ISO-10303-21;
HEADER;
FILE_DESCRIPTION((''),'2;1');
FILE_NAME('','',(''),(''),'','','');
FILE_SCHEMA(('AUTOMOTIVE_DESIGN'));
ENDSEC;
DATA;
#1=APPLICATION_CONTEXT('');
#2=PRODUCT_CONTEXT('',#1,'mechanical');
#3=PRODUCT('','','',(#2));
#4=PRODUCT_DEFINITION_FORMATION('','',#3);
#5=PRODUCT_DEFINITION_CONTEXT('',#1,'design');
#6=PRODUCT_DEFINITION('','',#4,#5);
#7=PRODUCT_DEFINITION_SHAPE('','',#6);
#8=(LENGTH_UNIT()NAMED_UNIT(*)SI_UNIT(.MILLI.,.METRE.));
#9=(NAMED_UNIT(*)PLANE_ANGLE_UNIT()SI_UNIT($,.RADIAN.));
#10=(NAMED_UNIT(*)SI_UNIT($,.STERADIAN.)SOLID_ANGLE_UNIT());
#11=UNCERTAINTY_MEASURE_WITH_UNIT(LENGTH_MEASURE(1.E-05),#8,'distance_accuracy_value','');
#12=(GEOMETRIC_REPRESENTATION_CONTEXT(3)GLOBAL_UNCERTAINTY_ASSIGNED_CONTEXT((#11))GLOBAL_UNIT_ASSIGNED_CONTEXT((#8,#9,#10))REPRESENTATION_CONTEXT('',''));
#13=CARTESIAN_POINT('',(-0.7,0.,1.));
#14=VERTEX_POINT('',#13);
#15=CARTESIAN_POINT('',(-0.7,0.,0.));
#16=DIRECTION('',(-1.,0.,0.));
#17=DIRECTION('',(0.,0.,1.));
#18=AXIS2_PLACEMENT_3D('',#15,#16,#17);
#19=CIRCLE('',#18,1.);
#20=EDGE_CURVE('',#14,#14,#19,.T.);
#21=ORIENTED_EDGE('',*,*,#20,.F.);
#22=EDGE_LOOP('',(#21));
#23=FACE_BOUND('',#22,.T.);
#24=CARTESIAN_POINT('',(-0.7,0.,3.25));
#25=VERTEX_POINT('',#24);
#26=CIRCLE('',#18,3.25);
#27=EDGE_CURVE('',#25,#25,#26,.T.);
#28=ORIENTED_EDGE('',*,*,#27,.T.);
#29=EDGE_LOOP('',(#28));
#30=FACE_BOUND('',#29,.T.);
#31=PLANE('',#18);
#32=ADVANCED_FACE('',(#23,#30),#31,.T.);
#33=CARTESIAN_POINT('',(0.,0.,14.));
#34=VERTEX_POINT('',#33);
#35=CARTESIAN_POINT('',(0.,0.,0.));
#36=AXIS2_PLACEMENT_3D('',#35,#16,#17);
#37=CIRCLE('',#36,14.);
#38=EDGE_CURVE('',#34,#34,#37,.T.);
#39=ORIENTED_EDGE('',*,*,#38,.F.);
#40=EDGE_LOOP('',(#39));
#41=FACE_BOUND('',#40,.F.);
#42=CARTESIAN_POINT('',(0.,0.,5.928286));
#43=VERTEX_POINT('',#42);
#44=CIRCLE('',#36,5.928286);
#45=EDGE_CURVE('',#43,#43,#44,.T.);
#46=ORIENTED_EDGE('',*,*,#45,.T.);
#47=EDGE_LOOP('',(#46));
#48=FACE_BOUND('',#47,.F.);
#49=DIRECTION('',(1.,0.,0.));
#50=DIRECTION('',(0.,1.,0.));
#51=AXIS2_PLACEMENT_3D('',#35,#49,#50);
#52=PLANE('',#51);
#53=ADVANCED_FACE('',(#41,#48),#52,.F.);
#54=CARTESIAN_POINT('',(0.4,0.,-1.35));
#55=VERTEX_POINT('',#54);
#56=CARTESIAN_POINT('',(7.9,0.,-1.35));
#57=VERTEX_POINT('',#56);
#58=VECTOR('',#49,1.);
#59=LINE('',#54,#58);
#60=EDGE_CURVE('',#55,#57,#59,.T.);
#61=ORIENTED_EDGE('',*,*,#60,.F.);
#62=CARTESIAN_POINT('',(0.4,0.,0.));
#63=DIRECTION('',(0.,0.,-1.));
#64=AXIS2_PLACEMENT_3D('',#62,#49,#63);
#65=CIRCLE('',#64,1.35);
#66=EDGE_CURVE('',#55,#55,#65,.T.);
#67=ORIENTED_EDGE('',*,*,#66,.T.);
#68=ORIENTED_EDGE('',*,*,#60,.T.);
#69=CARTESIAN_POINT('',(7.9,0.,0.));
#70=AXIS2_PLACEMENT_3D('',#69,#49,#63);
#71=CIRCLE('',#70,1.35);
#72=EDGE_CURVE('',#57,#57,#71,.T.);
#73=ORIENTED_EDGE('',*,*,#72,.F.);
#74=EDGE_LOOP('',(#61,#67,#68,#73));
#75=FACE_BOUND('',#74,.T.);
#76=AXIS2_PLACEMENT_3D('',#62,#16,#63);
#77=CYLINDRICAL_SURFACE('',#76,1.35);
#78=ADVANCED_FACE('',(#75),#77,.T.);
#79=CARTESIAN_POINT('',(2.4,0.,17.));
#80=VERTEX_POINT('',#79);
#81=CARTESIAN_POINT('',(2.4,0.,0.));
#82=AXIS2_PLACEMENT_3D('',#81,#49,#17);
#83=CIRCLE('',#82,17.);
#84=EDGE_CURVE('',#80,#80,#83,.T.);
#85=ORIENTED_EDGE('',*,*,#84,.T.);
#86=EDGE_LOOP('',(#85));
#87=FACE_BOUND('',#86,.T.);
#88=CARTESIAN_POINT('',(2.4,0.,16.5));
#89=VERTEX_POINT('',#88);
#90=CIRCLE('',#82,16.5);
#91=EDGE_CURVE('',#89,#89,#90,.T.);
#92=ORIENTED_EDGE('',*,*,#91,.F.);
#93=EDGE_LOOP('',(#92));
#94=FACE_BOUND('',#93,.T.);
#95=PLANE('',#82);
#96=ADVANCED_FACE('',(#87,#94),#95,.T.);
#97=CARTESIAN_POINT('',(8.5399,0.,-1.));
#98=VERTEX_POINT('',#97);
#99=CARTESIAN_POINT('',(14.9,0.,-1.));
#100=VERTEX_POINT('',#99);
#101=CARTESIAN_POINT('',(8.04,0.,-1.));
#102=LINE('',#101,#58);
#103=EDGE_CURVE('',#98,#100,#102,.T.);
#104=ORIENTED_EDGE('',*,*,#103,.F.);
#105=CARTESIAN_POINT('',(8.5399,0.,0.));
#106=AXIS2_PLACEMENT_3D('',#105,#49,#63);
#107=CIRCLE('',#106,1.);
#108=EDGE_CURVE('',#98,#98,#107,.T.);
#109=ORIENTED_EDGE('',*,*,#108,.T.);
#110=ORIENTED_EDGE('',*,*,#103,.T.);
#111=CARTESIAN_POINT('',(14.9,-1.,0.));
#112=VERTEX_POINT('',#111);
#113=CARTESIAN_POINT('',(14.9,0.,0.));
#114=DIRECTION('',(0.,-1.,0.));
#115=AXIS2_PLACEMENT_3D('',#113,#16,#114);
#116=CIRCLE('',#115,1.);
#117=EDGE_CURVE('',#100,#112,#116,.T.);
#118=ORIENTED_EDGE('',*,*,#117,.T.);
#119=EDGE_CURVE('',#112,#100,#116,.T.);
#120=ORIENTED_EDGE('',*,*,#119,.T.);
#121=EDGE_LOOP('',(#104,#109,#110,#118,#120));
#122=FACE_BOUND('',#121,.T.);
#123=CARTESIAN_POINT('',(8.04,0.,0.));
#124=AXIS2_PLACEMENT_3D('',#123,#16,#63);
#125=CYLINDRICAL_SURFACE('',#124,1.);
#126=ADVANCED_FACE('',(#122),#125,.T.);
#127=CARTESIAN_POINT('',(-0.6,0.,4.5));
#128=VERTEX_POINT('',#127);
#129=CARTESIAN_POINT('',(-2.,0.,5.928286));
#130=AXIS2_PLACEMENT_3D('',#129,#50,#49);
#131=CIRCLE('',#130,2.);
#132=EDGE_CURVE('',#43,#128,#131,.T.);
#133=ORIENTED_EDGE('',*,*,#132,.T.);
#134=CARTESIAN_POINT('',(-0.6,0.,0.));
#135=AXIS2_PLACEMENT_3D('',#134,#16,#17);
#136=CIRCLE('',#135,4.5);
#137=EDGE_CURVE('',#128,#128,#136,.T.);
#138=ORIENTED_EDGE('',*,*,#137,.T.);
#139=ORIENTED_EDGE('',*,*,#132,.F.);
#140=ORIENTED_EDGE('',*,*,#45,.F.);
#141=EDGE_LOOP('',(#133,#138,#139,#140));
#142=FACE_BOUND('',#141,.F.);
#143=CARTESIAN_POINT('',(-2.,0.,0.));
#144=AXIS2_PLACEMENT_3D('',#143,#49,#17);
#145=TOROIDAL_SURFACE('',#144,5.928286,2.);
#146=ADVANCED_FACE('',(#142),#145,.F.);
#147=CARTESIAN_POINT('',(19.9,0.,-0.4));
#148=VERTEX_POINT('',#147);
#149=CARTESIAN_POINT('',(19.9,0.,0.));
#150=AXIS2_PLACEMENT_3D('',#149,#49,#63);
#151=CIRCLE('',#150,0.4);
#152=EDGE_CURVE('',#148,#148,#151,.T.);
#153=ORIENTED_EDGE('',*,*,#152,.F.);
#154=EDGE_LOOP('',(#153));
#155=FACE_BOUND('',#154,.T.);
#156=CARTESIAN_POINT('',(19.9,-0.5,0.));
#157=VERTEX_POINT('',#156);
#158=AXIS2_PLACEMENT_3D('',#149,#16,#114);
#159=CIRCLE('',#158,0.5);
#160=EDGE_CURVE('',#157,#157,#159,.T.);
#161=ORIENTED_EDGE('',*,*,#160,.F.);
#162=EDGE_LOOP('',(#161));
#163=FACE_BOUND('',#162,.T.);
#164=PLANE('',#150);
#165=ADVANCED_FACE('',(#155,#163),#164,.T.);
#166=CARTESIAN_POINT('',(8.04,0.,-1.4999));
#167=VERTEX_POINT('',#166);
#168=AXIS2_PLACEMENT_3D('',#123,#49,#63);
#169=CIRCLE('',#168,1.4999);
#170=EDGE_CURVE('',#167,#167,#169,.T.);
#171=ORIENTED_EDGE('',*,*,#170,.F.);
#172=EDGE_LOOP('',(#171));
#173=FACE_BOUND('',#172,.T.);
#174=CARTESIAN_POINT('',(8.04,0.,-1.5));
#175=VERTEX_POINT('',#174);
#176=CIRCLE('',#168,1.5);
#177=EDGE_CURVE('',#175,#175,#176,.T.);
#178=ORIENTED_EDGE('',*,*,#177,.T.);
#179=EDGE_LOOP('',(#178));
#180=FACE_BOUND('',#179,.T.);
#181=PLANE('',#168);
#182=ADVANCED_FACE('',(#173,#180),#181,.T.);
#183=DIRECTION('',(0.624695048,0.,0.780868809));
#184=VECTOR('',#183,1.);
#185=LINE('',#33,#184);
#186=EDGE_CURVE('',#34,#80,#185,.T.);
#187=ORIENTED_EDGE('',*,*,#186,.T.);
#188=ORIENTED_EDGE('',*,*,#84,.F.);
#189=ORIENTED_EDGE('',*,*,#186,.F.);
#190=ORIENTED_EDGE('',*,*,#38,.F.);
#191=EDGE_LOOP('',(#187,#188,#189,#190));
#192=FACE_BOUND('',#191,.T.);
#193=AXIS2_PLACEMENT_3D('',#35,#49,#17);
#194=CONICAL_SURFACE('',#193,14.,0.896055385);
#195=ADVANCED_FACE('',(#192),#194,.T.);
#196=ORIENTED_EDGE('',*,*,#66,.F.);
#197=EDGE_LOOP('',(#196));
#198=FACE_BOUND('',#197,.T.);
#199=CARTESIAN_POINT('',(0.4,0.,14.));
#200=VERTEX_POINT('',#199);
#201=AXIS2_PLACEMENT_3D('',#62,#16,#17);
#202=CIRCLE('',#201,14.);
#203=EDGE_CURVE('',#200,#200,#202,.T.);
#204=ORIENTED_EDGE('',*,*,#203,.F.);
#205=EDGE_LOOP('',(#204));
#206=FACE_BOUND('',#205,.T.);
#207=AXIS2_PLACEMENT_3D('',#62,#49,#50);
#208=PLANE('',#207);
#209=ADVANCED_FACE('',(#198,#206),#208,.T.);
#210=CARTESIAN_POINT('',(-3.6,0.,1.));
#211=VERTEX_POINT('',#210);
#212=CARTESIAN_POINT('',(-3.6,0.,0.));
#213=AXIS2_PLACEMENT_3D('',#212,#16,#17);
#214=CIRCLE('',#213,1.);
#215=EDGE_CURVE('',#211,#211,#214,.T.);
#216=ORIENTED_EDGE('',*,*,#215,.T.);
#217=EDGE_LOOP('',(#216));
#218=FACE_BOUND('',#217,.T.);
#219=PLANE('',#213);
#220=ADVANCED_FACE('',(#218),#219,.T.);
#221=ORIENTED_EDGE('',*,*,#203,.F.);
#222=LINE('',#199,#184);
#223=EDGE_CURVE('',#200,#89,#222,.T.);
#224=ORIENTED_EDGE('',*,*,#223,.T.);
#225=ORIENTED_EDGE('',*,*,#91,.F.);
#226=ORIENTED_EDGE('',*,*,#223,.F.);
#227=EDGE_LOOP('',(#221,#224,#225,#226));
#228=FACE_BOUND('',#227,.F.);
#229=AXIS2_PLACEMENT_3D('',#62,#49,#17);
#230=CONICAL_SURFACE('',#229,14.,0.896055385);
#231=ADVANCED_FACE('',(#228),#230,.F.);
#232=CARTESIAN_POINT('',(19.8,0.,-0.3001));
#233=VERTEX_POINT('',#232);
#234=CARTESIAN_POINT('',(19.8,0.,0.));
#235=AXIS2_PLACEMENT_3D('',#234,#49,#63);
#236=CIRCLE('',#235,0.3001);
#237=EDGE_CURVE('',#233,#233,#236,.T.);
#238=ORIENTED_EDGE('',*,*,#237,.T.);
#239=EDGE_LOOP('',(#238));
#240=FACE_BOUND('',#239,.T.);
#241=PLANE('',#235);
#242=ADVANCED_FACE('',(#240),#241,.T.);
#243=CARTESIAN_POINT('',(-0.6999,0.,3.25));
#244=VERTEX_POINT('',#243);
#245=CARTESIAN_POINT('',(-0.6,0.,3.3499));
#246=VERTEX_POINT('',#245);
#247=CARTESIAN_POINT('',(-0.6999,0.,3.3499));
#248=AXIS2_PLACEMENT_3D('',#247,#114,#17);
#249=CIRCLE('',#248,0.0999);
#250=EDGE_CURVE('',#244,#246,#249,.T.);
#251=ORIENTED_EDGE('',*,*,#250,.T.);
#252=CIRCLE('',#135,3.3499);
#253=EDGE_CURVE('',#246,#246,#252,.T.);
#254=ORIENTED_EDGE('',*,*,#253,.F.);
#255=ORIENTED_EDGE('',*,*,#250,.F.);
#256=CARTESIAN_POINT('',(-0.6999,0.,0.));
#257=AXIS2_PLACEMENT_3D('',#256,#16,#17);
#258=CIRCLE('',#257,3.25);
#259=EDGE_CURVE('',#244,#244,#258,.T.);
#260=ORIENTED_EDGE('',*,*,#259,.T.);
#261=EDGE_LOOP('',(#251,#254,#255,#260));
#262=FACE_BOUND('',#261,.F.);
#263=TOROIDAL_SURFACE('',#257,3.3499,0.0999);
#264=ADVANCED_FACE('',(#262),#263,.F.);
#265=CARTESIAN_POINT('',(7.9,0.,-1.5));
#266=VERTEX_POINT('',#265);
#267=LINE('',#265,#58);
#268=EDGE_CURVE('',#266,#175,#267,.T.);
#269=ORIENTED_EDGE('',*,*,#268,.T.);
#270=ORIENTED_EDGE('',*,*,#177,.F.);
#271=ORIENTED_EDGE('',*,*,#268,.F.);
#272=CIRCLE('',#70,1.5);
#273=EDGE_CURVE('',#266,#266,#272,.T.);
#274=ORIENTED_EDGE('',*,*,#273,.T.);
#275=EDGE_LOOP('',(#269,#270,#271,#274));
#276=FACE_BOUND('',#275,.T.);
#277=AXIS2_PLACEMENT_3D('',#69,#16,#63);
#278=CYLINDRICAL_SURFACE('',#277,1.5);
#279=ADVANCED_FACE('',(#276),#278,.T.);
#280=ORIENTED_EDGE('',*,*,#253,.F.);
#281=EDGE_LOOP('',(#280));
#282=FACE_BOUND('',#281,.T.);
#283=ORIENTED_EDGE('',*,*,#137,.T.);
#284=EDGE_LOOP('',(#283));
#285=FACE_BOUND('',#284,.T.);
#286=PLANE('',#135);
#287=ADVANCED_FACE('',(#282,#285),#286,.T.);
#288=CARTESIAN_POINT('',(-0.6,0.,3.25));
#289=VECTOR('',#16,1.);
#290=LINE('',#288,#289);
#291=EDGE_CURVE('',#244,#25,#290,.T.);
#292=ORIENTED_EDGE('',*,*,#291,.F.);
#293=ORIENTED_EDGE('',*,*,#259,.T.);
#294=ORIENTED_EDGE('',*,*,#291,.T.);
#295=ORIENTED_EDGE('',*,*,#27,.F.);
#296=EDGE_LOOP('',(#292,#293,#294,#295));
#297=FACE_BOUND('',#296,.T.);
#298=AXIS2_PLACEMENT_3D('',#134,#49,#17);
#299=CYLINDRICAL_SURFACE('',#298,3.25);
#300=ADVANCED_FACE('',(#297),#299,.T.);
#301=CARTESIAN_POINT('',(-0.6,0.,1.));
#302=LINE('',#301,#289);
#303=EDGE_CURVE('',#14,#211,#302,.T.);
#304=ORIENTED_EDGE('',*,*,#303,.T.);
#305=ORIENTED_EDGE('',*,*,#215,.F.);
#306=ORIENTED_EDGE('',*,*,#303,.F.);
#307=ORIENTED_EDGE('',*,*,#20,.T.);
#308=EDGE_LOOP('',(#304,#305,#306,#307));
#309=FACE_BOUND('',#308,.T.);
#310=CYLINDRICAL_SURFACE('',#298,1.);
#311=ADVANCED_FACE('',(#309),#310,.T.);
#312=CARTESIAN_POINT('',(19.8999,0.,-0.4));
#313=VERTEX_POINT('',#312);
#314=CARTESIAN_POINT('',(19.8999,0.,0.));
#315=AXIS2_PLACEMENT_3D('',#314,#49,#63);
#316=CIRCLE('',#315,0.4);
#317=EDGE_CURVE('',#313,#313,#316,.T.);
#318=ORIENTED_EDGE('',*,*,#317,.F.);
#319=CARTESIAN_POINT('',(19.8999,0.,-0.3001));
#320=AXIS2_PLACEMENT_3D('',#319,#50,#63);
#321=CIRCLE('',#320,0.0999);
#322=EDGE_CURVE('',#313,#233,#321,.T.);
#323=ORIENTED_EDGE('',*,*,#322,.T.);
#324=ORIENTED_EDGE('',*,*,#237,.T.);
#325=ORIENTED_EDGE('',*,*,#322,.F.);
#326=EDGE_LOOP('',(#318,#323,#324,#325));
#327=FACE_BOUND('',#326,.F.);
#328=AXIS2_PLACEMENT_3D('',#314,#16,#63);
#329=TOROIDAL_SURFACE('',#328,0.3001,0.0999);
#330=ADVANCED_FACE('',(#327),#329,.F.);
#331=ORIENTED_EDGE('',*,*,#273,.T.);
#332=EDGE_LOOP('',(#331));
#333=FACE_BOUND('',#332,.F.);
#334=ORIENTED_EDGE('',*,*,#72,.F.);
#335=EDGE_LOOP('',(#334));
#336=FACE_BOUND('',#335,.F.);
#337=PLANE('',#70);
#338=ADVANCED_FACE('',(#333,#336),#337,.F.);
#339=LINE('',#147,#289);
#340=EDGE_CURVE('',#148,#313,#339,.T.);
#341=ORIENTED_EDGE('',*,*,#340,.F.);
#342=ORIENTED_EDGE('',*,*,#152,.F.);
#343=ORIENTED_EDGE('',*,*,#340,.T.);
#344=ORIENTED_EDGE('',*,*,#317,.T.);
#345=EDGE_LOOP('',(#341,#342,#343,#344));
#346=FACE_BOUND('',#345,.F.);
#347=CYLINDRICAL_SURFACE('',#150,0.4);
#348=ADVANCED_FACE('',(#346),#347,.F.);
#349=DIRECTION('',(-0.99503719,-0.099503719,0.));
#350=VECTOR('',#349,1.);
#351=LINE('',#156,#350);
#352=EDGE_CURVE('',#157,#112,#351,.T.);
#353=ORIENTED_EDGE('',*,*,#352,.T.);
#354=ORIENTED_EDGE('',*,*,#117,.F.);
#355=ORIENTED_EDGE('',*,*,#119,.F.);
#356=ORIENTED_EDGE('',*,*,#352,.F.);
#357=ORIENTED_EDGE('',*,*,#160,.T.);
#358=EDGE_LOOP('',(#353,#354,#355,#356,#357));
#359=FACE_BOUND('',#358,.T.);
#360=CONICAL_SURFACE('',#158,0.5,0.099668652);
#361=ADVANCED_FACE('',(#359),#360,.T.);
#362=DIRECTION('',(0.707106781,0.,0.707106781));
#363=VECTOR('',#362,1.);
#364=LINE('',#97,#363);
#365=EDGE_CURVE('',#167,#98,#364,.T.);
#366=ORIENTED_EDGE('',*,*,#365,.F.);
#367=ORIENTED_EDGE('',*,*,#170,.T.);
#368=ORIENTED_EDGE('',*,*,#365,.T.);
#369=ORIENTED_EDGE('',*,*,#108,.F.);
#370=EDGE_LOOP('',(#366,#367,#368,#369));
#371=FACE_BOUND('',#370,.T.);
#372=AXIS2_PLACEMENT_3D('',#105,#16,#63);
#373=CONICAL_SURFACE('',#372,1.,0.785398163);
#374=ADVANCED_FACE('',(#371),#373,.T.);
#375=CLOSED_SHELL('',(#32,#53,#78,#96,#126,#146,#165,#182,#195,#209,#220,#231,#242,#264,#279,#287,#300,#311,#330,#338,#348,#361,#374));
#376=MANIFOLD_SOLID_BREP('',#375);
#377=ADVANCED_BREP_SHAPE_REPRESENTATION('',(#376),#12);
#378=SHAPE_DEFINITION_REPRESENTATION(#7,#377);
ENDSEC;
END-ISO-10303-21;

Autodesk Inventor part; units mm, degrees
ref_plane "YZ Plane" through (0, 0, 0) normal (1, 0, 0) x (0, 1, 0)
ref_plane "XZ Plane" through (0, 0, 0) normal (0, 1, 0) x (-1, 0, 0)
sketch "Sketch1" plane through (0, 0, 0) normal (1, 0, 0) x (0, 1, 0)
  circle A0 centre (0, 0) radius 17
  circle A1 centre (0, 0) radius 14
  dimension "d0" = 34
  dimension "d1" = 28
extrude "Extrusion1" add sketch "Sketch1" along normal blind 0.4 contours A1
ref_plane "Work Plane1" through (2.4, 0, 0) normal (1, 0, 0) x (0, 0, -1)
sketch "Sketch2" plane through (2.4, 0, 0) normal (1, 0, 0) x (0, 0, -1)
  circle A0 centre (0, 0) radius 17
  dimension "d5" = 34
sketch "Sketch3" plane through (0, 0, 0) normal (0, 1, 0) x (-1, 0, 0)
  line L0 (-2.4, 17) -> (-2.4, -17) projected
  line L1 (0, 14) -> (0, -14) projected
  line L2 (0, 14) -> (-2.4, 17)
  line L3 (-0.4, 14) -> (-0.4, -14) projected
  line L4 (-0.4, 14) -> (-2.4, 16.5)
  line L5 (-0.4, 0) -> (-1.3096, 0)
  line L6 (0, 14) -> (-0.4, 14)
  line L7 (-2.4, 16.5) -> (-2.4, 17)
  point P0 (0, 0)
revolve "Revolution1" add sketch "Sketch3" angle 360 about axis through (0.4, 0, 0) along (1, 0, 0)
sketch "Sketch4" plane through (0, 0, 0) normal (-1, 0, 0) x (0, 0, 1)
  circle A0 centre (0, 0) radius 14 projected
  circle A1 centre (0, 0) radius 4.5
  dimension "d7" = 9
extrude "Extrusion2" add sketch "Sketch4" along normal blind 0.6 contours A1
fillet "Fillet1" radius 2 1 edges at (0, 0, -4.5)
sketch "Sketch5" plane through (-0.6, 0, 0) normal (-1, 0, 0) x (0, 0, 1)
  circle A0 centre (0, 0) radius 4.5 projected
  circle A1 centre (0, 0) radius 1
  dimension "d11" = 2
extrude "Extrusion3" add sketch "Sketch5" along normal blind 3 contours A1
sketch "Sketch6" plane through (0.4, 0, 0) normal (1, 0, 0) x (0, 0, -1)
  circle A0 centre (0, 0) radius 14 projected
  circle A1 centre (0, 0) radius 1.35
  dimension "d14" = 2.7
extrude "Extrusion4" add sketch "Sketch6" along normal blind 7.5 contours A1
sketch "Sketch7" plane through (7.9, 0, 0) normal (1, 0, 0) x (0, 0, -1)
  circle A0 centre (0, 0) radius 1 projected
  circle A1 centre (0, 0) radius 1.5
  dimension "d17" = 3
extrude "Extrusion5" add sketch "Sketch7" along normal blind 0.14 contours A0 | A1
sketch "Sketch8" plane through (8.04, 0, 0) normal (1, 0, 0) x (0, 0, -1)
  circle A0 centre (0, 0) radius 1.5 projected
  circle A1 centre (0, 0) radius 1
  dimension "d20" = 2
extrude "Extrusion6" add sketch "Sketch8" along normal blind 11.86 contours A1
chamfer "Chamfer1" distance 0.5 angle 45 1 edges at (8.04, 0, 1)
sketch "Sketch9" plane through (0, 0, 0) normal (0, 0, 1) x (1, 0, 0)
  line L0 (19.9, -1) -> (19.9, 1) projected
  line L1 (19.9, -0.5) -> (14.9, -1)
  line L2 (8.54, -1) -> (19.9, -1) projected
  line L3 (19.9, -0.5) -> (19.9, -1)
  line L4 (19.9, -1) -> (15, -1)
  line L5 (23, 0) -> (21.1668, 0)
  point P0 (0, 0)
  dimension "d26" = 0.5
  dimension "d27" = 5
revolve "Revolution2" cut sketch "Sketch9" angle 360 about axis through (23, 0, 0) along (-1, 0, 0)
sketch "Sketch10" plane through (19.9, 0, 0) normal (1, 0, 0) x (0, 0, -1)
  circle A0 centre (0, 0) radius 0.5 projected
  circle A1 centre (0, 0) radius 0.4
  dimension "d29" = 0.8
extrude "Extrusion7" cut sketch "Sketch10" against normal blind 0.1 contours A1
fillet "Fillet2" radius 0.1 1 edges at (19.8, 0, 0.4)
sketch "Sketch11" plane through (-0.6, 0, 0) normal (-1, 0, 0) x (0, 0, 1)
  circle A0 centre (0, 0) radius 1 projected
  circle A1 centre (0, 0) radius 4.5 projected
  circle A2 centre (0, 0) radius 3.25
  dimension "d33" = 6.5
extrude "Extrusion8" add sketch "Sketch11" along normal blind 0.1 contours A2
fillet "Fillet3" radius 0.1 1 edges at (-0.6, 0, -3.25)
properties part number "rubber replica"
